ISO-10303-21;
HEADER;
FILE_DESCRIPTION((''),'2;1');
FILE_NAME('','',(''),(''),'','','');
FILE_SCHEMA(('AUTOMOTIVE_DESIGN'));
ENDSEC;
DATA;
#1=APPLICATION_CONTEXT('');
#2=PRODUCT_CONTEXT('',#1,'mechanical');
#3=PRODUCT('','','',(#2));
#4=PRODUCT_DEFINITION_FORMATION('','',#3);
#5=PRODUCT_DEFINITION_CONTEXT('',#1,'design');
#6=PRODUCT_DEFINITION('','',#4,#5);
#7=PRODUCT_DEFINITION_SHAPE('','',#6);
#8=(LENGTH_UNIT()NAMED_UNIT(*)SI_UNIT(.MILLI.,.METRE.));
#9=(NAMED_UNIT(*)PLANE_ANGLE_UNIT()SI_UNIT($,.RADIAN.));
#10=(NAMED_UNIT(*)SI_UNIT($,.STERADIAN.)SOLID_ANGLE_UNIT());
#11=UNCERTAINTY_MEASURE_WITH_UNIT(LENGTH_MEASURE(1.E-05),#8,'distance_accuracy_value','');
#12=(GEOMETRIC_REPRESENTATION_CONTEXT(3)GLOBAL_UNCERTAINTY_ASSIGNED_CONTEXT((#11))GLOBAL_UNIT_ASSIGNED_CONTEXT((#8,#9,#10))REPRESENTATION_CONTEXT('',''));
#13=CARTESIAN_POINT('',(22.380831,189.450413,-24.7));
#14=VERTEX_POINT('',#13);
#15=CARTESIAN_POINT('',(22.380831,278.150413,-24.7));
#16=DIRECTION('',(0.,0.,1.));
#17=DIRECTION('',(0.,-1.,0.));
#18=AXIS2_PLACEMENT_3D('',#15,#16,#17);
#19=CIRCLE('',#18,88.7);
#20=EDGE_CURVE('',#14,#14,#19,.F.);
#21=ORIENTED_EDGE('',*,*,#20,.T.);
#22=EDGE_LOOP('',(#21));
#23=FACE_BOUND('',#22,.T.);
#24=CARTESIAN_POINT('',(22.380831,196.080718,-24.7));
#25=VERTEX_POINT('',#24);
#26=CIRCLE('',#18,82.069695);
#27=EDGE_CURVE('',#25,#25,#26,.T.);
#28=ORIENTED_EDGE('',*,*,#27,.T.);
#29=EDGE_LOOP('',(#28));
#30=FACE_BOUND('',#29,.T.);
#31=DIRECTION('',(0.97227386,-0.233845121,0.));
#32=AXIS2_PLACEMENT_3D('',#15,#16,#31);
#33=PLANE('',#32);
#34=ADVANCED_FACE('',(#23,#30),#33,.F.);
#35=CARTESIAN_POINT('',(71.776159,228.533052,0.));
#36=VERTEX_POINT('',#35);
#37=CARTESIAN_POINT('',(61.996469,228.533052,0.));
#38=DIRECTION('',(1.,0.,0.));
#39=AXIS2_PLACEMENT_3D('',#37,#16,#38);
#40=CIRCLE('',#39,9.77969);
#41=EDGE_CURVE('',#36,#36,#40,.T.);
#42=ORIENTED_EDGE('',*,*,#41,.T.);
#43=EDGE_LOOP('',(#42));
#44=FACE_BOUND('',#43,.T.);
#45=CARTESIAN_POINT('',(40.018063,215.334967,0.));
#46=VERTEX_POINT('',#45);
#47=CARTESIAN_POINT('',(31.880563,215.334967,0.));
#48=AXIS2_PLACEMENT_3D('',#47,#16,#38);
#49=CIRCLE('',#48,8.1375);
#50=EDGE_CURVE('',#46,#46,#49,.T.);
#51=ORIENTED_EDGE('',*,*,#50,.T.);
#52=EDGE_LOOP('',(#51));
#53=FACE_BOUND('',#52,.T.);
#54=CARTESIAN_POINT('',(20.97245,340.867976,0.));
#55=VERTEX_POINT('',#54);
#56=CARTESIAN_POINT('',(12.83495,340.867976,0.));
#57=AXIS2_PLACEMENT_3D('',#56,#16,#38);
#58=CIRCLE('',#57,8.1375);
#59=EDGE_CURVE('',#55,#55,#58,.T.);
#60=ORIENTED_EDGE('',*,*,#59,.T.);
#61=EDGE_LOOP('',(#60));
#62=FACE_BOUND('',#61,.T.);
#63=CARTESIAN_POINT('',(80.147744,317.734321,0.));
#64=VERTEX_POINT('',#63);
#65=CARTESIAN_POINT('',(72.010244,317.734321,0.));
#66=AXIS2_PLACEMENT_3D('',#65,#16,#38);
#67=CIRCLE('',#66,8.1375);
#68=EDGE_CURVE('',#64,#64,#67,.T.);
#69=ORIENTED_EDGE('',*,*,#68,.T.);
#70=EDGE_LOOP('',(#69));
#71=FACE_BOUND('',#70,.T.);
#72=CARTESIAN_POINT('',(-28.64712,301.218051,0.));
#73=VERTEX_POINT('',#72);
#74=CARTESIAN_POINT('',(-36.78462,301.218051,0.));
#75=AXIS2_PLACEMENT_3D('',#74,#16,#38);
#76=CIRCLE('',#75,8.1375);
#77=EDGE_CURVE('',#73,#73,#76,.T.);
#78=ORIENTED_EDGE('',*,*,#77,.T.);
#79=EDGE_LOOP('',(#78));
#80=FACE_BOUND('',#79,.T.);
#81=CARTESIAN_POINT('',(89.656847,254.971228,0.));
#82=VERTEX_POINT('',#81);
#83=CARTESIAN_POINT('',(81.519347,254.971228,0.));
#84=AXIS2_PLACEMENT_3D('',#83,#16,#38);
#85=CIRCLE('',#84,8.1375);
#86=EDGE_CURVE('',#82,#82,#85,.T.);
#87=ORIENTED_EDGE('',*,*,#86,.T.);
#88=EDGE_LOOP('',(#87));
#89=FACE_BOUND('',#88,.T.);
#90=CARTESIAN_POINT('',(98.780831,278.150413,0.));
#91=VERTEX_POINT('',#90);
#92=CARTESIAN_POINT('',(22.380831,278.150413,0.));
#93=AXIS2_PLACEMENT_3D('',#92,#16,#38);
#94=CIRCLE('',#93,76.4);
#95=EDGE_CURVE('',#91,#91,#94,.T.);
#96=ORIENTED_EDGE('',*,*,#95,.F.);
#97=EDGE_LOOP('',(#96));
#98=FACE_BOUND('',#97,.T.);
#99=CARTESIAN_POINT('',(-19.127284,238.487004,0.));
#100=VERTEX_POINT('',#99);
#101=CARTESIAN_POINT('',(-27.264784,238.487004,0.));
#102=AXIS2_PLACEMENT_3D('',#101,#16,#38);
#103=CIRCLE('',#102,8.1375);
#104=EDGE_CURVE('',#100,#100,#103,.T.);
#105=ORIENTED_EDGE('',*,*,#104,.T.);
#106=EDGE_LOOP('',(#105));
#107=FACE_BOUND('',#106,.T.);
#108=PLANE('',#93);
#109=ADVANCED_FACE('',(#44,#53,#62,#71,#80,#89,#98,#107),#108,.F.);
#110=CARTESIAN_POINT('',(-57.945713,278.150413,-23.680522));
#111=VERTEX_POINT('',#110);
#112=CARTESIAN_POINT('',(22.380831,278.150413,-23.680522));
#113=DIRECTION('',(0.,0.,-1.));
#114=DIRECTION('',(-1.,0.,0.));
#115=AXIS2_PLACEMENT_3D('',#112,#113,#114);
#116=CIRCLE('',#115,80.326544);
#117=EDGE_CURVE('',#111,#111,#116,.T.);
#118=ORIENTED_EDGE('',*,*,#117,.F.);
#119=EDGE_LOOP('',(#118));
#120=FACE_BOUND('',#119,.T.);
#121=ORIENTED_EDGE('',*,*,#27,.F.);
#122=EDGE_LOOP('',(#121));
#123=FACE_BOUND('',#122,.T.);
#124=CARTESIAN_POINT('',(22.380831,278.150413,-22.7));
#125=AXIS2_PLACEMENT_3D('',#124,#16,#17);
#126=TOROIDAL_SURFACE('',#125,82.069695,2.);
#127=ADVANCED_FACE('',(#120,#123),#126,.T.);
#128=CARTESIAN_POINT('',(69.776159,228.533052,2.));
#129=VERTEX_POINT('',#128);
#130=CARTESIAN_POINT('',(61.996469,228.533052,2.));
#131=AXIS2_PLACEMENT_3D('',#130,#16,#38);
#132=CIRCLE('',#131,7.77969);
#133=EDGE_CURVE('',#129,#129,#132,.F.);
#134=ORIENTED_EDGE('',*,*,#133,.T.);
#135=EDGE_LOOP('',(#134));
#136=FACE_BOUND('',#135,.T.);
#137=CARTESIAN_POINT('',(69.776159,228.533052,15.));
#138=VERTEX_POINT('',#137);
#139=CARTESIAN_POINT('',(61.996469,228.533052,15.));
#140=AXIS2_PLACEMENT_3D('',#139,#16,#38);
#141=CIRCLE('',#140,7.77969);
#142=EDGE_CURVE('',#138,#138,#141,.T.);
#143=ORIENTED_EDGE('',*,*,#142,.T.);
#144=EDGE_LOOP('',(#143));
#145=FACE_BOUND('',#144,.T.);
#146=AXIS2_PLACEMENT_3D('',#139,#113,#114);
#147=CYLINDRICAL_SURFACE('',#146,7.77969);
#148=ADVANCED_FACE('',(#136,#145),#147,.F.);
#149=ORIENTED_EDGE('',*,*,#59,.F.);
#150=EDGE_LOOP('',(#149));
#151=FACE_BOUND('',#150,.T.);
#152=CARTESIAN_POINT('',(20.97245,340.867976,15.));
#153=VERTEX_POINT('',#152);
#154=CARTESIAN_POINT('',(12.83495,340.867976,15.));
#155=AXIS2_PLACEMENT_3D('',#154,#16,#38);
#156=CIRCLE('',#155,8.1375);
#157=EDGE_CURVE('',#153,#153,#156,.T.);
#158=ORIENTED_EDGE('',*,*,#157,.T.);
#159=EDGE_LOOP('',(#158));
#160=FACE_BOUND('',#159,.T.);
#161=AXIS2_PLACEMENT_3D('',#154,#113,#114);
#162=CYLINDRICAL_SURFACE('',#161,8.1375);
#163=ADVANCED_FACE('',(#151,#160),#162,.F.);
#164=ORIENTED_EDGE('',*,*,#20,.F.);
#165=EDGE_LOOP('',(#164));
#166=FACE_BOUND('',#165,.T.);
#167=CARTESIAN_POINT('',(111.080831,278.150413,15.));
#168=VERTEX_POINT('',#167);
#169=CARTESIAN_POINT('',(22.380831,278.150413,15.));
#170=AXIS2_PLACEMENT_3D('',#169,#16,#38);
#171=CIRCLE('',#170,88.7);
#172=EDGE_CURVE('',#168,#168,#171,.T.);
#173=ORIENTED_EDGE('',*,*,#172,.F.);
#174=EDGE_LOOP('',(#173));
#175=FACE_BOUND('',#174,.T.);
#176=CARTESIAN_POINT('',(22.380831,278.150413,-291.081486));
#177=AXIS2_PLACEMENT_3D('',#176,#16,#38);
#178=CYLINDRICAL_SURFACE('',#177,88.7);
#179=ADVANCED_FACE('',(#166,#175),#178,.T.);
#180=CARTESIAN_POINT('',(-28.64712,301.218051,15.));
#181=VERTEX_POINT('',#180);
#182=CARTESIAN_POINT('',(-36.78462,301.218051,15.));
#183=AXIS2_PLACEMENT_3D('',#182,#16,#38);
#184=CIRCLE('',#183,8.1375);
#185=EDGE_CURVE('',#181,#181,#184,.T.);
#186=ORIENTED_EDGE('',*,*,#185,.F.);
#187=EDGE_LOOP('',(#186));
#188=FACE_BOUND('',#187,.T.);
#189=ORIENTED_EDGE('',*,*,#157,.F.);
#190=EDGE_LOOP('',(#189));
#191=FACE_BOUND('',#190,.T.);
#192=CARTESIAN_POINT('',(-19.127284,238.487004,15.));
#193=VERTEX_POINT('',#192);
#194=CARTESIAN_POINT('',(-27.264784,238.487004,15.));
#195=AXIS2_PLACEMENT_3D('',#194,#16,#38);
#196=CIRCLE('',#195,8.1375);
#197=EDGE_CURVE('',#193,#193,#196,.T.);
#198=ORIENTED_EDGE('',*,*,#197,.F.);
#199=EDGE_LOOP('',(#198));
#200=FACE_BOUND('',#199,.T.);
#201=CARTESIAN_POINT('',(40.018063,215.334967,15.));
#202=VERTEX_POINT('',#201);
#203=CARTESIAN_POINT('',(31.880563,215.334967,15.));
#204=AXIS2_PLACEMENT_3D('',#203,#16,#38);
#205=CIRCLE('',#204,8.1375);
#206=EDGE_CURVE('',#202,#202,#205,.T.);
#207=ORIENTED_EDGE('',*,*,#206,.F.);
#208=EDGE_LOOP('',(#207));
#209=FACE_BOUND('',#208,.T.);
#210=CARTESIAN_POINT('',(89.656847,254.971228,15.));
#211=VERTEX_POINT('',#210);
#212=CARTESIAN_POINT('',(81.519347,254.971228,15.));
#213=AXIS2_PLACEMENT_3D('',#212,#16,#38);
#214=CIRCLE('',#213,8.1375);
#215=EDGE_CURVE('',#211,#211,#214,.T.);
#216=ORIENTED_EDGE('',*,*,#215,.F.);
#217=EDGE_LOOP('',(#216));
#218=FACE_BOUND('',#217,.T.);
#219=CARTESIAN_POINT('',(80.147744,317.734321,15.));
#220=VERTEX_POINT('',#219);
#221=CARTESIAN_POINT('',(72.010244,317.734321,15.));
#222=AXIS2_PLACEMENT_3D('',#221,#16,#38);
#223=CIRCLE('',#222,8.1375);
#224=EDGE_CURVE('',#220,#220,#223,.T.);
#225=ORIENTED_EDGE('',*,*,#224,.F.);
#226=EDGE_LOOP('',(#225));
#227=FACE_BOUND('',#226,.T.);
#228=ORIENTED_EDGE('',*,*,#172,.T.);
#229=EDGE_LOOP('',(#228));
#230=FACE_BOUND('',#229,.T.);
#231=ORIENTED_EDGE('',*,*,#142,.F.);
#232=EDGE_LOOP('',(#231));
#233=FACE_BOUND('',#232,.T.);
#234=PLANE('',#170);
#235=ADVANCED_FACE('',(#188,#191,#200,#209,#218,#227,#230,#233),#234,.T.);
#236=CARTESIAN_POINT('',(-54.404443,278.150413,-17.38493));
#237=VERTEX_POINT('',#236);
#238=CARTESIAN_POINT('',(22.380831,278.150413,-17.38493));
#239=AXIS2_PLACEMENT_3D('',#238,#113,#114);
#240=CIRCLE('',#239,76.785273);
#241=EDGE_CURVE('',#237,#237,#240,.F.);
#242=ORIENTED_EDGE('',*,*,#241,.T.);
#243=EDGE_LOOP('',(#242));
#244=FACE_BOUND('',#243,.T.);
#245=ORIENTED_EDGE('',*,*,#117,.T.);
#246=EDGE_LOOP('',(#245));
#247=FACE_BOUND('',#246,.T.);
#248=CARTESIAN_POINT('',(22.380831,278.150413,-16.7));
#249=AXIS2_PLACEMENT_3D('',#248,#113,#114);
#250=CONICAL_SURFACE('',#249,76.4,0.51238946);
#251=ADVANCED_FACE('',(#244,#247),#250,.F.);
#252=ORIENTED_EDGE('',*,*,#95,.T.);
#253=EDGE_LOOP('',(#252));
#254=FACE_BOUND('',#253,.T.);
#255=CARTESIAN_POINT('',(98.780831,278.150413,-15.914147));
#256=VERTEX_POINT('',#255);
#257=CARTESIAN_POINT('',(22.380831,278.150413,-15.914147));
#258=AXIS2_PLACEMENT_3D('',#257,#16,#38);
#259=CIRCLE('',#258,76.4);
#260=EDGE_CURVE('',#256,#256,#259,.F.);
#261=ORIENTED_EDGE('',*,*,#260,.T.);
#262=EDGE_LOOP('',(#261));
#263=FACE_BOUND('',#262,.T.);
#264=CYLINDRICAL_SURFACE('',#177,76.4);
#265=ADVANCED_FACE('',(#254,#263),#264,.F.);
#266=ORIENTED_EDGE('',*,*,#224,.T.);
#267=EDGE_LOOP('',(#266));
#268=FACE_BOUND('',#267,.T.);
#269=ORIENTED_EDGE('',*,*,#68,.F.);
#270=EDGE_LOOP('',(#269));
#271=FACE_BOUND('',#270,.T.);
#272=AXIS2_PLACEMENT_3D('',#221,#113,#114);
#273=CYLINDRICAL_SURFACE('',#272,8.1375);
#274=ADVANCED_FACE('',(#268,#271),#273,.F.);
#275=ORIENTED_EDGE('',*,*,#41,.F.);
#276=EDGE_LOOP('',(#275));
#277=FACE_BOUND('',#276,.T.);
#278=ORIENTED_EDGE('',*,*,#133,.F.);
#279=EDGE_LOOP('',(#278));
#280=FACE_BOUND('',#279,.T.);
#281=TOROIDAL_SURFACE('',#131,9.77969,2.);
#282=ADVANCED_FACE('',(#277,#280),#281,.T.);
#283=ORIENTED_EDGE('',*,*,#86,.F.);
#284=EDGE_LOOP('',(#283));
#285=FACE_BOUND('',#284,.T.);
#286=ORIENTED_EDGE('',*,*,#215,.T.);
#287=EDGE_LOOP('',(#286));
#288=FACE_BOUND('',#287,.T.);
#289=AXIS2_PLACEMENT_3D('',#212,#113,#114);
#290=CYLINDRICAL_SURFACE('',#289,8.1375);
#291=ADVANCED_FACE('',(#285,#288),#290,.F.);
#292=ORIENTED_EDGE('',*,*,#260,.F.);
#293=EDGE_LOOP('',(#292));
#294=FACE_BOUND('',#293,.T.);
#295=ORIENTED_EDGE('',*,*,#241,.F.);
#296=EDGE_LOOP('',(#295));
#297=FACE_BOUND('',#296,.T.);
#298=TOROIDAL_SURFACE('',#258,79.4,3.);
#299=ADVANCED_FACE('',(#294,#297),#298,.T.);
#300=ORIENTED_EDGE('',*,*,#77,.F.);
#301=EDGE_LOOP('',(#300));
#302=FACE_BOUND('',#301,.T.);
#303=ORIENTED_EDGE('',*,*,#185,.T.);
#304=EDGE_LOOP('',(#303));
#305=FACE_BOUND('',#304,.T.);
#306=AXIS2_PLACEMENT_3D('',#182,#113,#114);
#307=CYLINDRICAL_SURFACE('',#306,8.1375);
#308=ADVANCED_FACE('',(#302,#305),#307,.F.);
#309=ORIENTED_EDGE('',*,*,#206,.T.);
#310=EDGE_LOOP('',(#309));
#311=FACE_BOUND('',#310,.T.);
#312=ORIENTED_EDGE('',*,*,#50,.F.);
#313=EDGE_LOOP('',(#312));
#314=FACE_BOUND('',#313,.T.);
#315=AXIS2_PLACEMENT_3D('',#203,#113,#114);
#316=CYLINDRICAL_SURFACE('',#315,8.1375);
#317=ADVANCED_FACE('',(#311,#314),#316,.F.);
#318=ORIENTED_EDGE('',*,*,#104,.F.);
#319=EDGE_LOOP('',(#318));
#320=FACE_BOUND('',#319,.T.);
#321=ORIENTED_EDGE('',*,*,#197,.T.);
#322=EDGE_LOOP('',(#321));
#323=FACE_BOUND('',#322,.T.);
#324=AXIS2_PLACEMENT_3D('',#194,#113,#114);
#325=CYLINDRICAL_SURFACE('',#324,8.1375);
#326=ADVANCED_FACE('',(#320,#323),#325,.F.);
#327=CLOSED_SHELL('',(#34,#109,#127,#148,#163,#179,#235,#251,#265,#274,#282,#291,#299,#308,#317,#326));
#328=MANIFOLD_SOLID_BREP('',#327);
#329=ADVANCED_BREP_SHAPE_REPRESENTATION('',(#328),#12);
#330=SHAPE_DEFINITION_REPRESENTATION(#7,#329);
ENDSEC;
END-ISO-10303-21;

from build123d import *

# Parameters (mm, degrees)
SKETCH2_R           = 88.7
BOSS_EXTRUDE1_DEPTH = 24.7
BOSS_EXTRUDE2_START = 15
SKETCH3_R           = 88.7
SKETCH3_R_2         = 8.1375
BOSS_EXTRUDE2_DEPTH = 15
FILLET1_R           = 2
FILLET2_R           = 3
FILLET3_R           = 2


with BuildPart() as part:
    # Sketch2 → Boss-Extrude1 (new body)
    with BuildSketch(Plane.XY):
        with Locations((22.380830856, 278.150413141)):
            Circle(SKETCH2_R)
        with BuildLine():
            ThreePointArc((22.380830856, 354.550413141), (-54.019169144, 278.150413141), (22.380830856, 201.750413141))
            ThreePointArc((22.380830856, 201.750413141), (98.780830856, 278.150413141), (22.380830856, 354.550413141))
        make_face(mode=Mode.SUBTRACT)
    extrude(amount=-BOSS_EXTRUDE1_DEPTH)

    # Sketch3 → Boss-Extrude2 (add)
    with BuildSketch(Plane.XY.offset(BOSS_EXTRUDE2_START)):
        with Locations((22.380830856, 278.150413141)):
            Circle(SKETCH3_R)
        with Locations((12.834949907, 340.867975839)):
            Circle(SKETCH3_R_2, mode=Mode.SUBTRACT)
        with Locations((72.010243633, 317.73432135)):
            Circle(SKETCH3_R_2, mode=Mode.SUBTRACT)
        with Locations((-36.784620153, 301.21805109)):
            Circle(SKETCH3_R_2, mode=Mode.SUBTRACT)
        with Locations((-27.264784017, 238.487003795)):
            Circle(SKETCH3_R_2, mode=Mode.SUBTRACT)
        with Locations((31.880563493, 215.334967411)):
            Circle(SKETCH3_R_2, mode=Mode.SUBTRACT)
        with Locations((81.519347087, 254.971228106)):
            Circle(SKETCH3_R_2, mode=Mode.SUBTRACT)
        with BuildLine():
            ThreePointArc((61.996469473, 236.312741601), (54.216779809, 228.533051937), (61.996469473, 220.753362274))
            ThreePointArc((61.996469473, 220.753362274), (69.776159136, 228.533051937), (61.996469473, 236.312741601))
        make_face(mode=Mode.SUBTRACT)
    extrude(amount=-BOSS_EXTRUDE2_DEPTH)

    # Fillet1
    fillet1_edges = [part.edges().sort_by_distance(p)[0] for p in [
        (61.996469473, 220.753362274, 0),
    ]]
    fillet(fillet1_edges, radius=FILLET1_R)

    # Chamfer1: read off the stored shape, not the designer's step
    # Chamfer1 outline → Chamfer1 (revolve, cut)
    with BuildSketch(Plane(origin=(22.380830856, 278.150413141, 0), x_dir=(1, 0, 0), z_dir=(0, -1, 0))):
        Polygon((80.9, -24.7), (76.4, -16.7), (76.4, -24.7), align=None)
    revolve(axis=Axis((22.380830856, 278.150413141, 0), (0, 0, 1)), mode=Mode.SUBTRACT)

    # Fillet2
    fillet2_edges = [part.edges().sort_by_distance(p)[0] for p in [
        (76.403788939, 332.173371224, -16.7),
    ]]
    fillet(fillet2_edges, radius=FILLET2_R)

    # Fillet3
    fillet3_edges = [part.edges().sort_by_distance(p)[0] for p in [
        (-58.519169144, 278.150413141, -24.7),
    ]]
    fillet(fillet3_edges, radius=FILLET3_R)


solid = part.part
